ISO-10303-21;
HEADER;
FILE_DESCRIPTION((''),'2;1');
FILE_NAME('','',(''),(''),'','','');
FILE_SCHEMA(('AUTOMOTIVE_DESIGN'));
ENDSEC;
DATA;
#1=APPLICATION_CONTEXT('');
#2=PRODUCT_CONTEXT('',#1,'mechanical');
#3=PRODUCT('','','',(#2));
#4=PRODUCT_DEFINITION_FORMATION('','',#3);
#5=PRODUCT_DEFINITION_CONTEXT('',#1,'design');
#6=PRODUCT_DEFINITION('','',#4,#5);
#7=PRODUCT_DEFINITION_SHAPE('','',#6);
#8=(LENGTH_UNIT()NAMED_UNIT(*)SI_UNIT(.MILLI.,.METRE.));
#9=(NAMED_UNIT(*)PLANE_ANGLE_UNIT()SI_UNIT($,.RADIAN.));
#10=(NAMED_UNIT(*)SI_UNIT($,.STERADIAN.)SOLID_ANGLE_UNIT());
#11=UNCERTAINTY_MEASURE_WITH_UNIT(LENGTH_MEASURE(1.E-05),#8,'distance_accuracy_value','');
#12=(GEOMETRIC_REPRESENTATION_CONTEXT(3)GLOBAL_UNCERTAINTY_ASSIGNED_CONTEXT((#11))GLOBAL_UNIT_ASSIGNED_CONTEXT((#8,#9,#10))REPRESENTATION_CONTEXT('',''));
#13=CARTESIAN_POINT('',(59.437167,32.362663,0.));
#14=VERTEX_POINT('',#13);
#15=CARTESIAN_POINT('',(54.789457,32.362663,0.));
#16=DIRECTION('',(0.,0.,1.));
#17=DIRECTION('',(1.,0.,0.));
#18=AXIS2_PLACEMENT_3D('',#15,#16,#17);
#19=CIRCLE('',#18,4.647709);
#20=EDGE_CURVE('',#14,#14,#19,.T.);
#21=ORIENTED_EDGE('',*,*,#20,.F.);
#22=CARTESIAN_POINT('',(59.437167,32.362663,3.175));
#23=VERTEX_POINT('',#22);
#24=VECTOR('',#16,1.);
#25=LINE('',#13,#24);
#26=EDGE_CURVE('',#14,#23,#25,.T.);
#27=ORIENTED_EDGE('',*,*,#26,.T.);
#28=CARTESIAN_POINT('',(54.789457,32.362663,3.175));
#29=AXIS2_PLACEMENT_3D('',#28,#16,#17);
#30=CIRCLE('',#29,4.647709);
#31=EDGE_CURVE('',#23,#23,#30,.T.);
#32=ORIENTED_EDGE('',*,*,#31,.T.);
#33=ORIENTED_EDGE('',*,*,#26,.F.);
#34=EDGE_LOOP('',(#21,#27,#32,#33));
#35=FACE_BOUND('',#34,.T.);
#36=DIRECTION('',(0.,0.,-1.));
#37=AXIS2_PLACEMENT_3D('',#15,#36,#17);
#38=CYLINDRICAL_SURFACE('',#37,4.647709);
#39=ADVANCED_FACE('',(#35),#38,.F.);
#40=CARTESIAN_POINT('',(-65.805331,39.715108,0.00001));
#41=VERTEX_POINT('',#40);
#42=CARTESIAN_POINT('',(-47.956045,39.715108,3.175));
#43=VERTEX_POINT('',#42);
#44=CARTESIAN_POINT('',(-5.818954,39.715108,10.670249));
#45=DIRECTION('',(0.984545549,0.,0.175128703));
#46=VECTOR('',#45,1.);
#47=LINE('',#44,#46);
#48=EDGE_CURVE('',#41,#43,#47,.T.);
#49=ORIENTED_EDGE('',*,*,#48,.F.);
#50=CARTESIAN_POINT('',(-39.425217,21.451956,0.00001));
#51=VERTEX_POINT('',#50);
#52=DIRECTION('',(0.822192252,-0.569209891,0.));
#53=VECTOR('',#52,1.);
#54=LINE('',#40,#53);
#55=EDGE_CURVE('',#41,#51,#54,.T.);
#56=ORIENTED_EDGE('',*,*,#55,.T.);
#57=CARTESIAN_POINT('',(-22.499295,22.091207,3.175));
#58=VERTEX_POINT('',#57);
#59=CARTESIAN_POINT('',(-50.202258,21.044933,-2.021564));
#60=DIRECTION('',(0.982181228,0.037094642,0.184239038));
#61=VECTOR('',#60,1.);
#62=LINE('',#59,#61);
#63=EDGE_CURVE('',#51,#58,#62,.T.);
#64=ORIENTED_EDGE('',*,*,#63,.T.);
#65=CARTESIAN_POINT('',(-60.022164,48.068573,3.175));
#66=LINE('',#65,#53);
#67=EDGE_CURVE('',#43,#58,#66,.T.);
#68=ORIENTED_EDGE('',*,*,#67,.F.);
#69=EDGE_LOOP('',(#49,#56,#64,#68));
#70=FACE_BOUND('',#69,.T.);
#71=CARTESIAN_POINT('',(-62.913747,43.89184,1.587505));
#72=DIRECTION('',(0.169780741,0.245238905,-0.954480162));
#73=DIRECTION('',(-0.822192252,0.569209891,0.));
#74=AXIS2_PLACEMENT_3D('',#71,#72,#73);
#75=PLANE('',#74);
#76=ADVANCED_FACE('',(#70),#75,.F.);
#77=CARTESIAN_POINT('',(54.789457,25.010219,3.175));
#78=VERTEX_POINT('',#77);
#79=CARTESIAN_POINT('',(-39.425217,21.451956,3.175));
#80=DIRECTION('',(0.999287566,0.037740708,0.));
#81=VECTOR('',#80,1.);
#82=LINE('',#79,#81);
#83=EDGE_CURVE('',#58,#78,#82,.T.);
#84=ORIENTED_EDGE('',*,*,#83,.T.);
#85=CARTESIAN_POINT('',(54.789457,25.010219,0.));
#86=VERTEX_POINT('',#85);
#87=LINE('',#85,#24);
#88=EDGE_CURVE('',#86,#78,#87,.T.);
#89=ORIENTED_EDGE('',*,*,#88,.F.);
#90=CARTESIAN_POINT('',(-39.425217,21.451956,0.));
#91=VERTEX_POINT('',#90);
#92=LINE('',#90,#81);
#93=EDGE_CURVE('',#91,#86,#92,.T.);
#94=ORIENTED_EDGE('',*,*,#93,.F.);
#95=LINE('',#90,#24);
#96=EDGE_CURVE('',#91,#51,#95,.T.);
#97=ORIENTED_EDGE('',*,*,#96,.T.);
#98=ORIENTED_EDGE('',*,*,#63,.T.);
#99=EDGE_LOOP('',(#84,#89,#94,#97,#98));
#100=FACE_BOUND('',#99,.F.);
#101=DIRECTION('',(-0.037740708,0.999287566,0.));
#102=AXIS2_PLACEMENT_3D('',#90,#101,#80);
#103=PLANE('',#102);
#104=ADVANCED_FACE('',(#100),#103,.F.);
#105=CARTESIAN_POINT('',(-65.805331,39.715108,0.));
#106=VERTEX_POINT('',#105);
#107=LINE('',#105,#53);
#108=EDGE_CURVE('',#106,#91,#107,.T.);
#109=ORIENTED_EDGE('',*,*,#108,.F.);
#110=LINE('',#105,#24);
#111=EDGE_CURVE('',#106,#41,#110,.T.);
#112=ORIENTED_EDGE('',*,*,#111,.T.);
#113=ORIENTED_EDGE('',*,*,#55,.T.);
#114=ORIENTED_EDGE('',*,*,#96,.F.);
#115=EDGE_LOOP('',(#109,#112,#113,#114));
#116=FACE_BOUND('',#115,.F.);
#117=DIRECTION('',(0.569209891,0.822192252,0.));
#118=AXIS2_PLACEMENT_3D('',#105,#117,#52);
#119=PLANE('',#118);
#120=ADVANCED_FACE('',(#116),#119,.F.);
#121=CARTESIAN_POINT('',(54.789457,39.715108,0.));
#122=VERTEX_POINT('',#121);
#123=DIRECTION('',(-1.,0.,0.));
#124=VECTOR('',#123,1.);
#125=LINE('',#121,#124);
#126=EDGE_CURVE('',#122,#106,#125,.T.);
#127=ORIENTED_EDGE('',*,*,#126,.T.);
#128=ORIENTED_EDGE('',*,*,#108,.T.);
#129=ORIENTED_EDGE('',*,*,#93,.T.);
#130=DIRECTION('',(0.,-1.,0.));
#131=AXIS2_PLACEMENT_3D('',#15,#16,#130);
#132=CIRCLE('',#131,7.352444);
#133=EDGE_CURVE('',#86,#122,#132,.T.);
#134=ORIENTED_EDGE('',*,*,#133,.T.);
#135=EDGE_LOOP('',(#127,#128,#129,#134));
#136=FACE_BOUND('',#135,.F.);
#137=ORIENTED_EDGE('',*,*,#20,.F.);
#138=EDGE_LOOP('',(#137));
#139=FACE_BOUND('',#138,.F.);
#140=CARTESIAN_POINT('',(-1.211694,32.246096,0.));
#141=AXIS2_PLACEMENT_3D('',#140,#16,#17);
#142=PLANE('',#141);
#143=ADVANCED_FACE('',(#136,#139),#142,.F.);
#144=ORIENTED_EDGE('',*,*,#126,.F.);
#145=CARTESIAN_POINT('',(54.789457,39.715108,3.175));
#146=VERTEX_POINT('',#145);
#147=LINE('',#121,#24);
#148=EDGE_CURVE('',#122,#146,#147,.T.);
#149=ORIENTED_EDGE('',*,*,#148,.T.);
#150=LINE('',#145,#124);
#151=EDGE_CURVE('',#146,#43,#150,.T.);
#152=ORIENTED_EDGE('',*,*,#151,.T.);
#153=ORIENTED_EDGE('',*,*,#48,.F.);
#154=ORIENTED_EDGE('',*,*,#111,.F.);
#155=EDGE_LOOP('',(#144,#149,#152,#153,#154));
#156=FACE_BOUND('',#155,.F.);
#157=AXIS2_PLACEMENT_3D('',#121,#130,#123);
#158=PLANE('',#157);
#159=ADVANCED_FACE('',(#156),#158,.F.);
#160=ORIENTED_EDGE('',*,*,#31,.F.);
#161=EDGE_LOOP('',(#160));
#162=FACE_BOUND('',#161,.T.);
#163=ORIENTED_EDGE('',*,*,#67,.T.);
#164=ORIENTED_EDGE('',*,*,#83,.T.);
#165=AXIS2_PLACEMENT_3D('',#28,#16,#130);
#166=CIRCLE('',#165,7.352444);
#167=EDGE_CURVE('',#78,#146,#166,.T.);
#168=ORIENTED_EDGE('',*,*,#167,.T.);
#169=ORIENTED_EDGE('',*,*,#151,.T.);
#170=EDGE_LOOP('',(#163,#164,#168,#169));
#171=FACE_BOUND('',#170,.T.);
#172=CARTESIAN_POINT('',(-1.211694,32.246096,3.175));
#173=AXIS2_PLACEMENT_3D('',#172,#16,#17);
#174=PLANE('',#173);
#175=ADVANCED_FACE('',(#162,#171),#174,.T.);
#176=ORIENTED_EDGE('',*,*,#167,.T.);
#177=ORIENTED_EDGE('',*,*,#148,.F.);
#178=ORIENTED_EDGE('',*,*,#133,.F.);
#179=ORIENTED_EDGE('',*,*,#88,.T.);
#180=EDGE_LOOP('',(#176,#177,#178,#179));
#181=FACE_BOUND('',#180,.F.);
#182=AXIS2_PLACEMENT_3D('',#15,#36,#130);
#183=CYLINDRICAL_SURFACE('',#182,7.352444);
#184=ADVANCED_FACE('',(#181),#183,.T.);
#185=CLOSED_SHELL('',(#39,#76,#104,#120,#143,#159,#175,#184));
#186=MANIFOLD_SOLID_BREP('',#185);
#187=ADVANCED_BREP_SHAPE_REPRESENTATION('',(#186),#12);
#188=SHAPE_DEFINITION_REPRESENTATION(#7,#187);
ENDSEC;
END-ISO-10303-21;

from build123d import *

# Parameters (mm, degrees)
F0_R     = 4.6477092711
F1_DEPTH = 3.175
F2_SIZE2 = 10.15999
F2_SIZE  = 3.17499


# Not quite as in the source:
# - a fillet or chamfer is up to 0.001 mm smaller than in the source, because OpenCascade refuses the exact size


with BuildPart() as f1:
    # F0 (on Top) → F1 (new body)
    with BuildSketch(Plane.XY):
        with BuildLine():
            Line((54.7894574702, 39.7151075304), (-65.8053308725, 39.7151075304))
            Line((-65.8053308725, 39.7151075304), (-39.4252166152, 21.4519556612))
            Line((-39.4252166152, 21.4519556612), (54.7894574702, 25.0102191872))
            ThreePointArc((54.7894574702, 25.0102191872), (62.1419016418, 32.3626633588), (54.7894574702, 39.7151075304))
        make_face()
        with Locations((54.7894574702, 32.3626633588)):
            Circle(F0_R, mode=Mode.SUBTRACT)
    extrude(amount=F1_DEPTH)

    # F2 (size 3.175 and 10.16 in the source; OpenCascade refuses exactly that, so slightly less here)
    f2_edges = [f1.edges().sort_by_distance(p)[0] for p in [
        (-52.615274, 30.583532, 3.175),
    ]]
    f2_side = f1.faces().sort_by_distance((-52.615274, 30.583532, 1.5875))[0]
    chamfer(f2_edges, length=F2_SIZE, length2=F2_SIZE2, reference=f2_side)


solid = f1.part
